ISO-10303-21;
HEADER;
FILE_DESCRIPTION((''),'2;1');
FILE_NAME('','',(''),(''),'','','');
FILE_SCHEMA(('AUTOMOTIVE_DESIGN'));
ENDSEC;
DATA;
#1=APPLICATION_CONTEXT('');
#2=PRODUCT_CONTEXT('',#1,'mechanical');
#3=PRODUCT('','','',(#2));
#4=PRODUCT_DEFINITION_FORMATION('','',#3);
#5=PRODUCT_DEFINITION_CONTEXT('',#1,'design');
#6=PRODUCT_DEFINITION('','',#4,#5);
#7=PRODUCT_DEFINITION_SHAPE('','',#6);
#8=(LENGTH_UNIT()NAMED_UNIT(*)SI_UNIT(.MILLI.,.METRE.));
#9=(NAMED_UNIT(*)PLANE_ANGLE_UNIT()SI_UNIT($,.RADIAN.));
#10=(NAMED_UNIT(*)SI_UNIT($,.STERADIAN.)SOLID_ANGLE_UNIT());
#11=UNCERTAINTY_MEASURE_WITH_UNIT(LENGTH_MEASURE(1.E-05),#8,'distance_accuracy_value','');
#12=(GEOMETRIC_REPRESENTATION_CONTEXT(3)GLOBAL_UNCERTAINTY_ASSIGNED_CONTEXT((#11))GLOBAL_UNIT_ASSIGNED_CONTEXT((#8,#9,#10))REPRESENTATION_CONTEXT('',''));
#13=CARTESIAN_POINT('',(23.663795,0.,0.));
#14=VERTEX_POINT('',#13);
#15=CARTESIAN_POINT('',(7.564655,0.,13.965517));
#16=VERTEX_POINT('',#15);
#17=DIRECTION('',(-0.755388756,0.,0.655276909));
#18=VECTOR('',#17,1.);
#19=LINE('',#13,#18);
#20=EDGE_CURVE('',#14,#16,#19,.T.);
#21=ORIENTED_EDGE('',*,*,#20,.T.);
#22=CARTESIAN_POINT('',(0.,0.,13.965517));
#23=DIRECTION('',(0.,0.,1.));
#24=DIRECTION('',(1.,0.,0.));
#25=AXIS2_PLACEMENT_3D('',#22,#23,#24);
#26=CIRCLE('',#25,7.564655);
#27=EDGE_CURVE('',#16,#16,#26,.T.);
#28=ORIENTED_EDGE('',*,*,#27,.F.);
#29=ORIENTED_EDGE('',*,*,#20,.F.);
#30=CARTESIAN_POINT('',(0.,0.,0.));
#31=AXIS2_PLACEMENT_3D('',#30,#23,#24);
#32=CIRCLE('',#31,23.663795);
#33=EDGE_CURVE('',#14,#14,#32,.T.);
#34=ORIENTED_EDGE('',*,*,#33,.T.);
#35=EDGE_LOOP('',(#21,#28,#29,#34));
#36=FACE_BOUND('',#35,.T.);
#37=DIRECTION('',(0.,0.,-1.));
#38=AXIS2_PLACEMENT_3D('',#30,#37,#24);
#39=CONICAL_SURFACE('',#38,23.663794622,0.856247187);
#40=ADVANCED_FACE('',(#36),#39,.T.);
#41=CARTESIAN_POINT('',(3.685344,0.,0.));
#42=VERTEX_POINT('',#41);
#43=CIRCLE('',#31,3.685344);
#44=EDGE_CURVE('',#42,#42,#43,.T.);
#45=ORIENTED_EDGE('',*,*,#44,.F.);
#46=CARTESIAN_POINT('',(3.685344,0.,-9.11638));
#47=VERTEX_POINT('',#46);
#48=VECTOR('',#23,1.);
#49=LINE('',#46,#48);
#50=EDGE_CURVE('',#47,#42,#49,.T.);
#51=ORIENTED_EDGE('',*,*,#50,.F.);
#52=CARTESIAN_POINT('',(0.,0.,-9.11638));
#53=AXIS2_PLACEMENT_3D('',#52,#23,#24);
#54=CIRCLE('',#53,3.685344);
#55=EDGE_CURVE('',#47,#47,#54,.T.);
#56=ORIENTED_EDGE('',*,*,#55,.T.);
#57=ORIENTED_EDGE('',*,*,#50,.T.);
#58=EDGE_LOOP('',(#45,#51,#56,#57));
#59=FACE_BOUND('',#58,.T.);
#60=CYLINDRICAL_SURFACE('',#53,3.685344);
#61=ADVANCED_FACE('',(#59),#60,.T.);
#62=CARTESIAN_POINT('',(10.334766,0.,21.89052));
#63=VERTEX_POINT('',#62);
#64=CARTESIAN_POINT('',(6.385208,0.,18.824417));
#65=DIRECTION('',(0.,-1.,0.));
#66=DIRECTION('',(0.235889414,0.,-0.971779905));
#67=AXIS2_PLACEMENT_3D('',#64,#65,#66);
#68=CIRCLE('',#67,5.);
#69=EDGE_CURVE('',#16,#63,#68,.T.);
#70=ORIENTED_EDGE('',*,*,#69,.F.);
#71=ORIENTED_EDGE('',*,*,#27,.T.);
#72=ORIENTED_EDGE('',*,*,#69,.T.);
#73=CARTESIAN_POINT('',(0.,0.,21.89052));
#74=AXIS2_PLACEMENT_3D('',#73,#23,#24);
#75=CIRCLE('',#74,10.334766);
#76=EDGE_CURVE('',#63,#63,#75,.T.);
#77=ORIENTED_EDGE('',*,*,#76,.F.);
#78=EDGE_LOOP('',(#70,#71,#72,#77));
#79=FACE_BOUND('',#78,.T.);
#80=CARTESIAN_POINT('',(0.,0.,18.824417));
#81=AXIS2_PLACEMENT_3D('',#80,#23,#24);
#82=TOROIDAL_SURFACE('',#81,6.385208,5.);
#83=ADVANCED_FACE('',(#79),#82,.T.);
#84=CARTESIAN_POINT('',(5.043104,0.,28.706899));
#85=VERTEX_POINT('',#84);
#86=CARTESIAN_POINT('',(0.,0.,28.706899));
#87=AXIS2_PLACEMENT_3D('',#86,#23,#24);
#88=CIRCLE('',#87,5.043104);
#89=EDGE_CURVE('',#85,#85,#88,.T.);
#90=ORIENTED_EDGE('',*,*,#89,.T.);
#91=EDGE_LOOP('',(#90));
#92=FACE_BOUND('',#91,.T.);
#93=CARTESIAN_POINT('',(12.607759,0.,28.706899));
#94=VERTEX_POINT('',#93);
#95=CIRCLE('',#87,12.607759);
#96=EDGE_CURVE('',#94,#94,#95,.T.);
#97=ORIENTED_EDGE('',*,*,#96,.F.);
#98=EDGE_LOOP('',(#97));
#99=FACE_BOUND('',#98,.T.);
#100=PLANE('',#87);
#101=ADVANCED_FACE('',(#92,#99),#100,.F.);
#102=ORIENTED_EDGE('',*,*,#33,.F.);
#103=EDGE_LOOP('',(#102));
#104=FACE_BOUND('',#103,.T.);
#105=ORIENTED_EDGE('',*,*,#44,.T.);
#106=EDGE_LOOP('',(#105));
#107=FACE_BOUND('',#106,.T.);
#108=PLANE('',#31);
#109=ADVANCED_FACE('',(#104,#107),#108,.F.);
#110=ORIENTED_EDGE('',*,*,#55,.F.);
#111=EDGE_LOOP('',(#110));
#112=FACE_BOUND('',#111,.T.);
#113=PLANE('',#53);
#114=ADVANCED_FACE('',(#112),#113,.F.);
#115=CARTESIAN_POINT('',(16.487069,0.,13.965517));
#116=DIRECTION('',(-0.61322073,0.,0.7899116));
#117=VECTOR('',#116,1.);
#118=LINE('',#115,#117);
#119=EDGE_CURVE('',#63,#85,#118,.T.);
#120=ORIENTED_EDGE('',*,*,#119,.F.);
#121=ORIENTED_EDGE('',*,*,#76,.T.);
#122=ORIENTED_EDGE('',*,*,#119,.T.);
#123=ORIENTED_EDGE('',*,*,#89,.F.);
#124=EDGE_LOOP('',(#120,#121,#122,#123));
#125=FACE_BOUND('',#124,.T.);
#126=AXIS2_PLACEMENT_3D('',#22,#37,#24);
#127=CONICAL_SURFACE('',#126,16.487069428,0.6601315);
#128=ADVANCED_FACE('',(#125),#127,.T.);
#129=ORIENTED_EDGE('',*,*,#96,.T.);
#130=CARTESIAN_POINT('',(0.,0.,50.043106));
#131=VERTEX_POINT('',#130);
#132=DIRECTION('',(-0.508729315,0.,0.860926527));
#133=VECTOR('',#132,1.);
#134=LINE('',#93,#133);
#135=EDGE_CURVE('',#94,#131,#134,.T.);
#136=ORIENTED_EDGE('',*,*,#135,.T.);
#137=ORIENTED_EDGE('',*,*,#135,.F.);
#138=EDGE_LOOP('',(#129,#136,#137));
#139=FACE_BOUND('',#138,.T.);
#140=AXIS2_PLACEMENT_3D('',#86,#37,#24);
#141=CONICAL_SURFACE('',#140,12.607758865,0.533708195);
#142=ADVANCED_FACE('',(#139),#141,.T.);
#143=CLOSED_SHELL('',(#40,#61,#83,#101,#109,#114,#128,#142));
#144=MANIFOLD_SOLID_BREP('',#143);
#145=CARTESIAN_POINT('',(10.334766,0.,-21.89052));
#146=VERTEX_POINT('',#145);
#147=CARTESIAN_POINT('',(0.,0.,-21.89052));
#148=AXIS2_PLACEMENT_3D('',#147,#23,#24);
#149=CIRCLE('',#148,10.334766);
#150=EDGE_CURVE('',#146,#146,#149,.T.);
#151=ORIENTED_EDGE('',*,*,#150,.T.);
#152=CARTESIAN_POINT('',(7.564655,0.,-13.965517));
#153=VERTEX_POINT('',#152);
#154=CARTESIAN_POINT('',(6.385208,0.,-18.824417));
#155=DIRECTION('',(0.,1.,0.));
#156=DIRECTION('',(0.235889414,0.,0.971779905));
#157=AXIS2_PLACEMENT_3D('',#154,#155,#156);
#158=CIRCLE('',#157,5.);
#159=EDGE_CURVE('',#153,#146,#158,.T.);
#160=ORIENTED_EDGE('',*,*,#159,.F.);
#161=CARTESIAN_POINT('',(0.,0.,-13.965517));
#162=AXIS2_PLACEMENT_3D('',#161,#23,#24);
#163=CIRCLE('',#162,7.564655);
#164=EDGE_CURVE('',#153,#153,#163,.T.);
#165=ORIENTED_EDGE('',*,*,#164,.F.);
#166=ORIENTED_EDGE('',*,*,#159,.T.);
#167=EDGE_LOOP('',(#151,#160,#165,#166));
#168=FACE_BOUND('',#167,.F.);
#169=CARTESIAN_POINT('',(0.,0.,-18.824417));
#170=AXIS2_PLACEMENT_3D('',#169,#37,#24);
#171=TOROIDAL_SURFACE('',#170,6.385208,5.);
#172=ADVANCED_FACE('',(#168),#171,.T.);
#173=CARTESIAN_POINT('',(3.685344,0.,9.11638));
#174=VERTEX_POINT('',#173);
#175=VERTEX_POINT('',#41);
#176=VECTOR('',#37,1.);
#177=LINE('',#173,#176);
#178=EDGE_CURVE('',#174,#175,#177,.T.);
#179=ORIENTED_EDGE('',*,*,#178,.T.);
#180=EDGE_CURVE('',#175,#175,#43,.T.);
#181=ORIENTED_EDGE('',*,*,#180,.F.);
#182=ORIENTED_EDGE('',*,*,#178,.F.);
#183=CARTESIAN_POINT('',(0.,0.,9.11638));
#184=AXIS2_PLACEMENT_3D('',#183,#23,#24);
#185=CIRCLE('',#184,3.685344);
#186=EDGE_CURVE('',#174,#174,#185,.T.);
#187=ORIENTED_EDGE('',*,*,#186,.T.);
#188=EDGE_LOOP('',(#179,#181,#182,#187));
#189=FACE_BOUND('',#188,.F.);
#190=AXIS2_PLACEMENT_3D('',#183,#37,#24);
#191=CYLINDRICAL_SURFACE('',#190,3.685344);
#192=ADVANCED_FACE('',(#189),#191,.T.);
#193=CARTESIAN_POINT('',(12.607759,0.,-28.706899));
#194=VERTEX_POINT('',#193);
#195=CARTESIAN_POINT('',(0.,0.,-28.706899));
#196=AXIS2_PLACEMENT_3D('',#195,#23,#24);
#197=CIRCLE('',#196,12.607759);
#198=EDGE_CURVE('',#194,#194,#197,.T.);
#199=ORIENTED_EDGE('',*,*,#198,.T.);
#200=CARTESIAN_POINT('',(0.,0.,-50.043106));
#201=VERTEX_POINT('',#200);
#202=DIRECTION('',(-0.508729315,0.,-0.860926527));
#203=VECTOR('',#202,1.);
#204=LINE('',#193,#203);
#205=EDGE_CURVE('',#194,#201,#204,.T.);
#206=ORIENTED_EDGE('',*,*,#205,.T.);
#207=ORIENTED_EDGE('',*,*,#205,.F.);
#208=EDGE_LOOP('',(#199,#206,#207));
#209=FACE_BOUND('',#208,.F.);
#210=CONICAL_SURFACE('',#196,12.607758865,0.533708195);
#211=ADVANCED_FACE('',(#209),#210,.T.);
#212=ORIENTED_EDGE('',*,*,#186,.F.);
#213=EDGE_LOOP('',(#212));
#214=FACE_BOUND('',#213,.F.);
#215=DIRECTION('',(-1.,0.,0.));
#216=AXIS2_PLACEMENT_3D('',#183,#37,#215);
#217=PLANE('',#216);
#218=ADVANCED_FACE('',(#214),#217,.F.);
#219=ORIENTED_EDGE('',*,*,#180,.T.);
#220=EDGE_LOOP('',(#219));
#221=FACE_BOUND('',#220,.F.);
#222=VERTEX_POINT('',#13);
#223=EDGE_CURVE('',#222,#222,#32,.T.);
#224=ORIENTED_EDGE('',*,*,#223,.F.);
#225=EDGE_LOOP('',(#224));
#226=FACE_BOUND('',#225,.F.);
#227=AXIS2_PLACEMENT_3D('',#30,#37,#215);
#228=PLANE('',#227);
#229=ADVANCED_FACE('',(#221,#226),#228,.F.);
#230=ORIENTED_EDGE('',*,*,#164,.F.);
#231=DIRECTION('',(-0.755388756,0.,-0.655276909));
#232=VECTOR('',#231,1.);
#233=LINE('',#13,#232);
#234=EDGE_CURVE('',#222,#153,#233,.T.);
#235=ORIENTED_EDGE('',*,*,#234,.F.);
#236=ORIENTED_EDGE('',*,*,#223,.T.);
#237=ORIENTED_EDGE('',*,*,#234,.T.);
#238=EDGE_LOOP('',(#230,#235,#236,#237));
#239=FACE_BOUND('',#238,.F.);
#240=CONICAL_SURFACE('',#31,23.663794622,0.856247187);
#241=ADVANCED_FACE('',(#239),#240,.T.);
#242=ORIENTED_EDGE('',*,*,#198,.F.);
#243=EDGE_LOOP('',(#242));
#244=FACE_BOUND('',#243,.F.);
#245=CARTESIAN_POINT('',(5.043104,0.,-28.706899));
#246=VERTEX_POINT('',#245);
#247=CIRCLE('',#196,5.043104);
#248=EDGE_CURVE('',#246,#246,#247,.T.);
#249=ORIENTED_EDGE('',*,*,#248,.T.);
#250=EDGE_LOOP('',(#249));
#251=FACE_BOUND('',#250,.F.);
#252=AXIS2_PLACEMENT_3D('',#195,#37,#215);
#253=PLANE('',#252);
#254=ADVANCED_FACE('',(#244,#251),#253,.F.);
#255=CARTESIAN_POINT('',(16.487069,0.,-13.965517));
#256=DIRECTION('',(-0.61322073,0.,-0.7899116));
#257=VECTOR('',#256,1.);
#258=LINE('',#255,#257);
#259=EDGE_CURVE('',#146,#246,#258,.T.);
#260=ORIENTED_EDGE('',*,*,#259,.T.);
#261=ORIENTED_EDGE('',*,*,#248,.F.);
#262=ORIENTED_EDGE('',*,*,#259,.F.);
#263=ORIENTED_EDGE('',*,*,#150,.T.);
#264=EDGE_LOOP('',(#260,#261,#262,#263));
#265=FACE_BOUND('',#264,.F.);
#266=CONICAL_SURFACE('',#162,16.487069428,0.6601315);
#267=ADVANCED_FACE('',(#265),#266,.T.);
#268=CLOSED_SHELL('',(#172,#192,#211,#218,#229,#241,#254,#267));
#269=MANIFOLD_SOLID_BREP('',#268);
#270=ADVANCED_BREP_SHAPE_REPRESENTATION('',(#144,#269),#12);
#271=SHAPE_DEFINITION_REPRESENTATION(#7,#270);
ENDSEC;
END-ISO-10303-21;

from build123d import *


# Not quite as in the source:
# - a fillet or chamfer that OpenCascade refuses, or shapes differently, is made with other operations: its cross-section is extruded or revolved along the edge and cut away or added


with BuildPart() as f1:
    # F0 (on Front) → F1 (revolve)
    with BuildSketch(Plane.XZ):
        Polygon((12.6077588648, 28.7068989128), (0, 50.0431060791), (0, -9.1163795441), (3.6853442434, -9.1163795441), (3.6853442434, 0), (23.6637946218, 0), (7.5646545738, 13.9655172825), (16.487069428, 13.9655172825), (5.043104291, 28.7068989128), align=None)
    revolve(axis=Axis((0, 0, 20.4633632675), (0, 0, 1)))


with BuildPart() as f2_1:
    # F2: instance of F1
    add(f1.part.mirror(Plane.XY))

    # F4: fillet of radius 5 on 1 edges, made by hand

    # F4_s1 → F4_t2 (revolve, cut)
    with BuildSketch(Plane.XZ):
        with BuildLine():
            ThreePointArc((7.5646545738, -13.9655172825), (11.1051748853, -17.1745962427), (10.3347655016, -21.8905204608))
            Line((10.3347655016, -21.8905204608), (16.487069428, -13.9655172825))
            Line((16.487069428, -13.9655172825), (7.5646545738, -13.9655172825))
        make_face()
    revolve(axis=Axis((0, 0, -13.9655172825), (0, 0, 1)), mode=Mode.SUBTRACT)


with BuildPart() as f1_1:
    add(f1.part)

    # F3: fillet of radius 5 on 1 edges, made by hand

    # F3_s1 → F3_t2 (revolve, cut)
    with BuildSketch(Plane.XZ):
        with BuildLine():
            ThreePointArc((7.5646545738, 13.9655172825), (11.1051748853, 17.1745962427), (10.3347655016, 21.8905204608))
            Line((10.3347655016, 21.8905204608), (16.487069428, 13.9655172825))
            Line((16.487069428, 13.9655172825), (7.5646545738, 13.9655172825))
        make_face()
    revolve(axis=Axis((0, 0, 13.9655172825), (0, 0, 1)), mode=Mode.SUBTRACT)


solid = Compound([f2_1.part, f1_1.part])
